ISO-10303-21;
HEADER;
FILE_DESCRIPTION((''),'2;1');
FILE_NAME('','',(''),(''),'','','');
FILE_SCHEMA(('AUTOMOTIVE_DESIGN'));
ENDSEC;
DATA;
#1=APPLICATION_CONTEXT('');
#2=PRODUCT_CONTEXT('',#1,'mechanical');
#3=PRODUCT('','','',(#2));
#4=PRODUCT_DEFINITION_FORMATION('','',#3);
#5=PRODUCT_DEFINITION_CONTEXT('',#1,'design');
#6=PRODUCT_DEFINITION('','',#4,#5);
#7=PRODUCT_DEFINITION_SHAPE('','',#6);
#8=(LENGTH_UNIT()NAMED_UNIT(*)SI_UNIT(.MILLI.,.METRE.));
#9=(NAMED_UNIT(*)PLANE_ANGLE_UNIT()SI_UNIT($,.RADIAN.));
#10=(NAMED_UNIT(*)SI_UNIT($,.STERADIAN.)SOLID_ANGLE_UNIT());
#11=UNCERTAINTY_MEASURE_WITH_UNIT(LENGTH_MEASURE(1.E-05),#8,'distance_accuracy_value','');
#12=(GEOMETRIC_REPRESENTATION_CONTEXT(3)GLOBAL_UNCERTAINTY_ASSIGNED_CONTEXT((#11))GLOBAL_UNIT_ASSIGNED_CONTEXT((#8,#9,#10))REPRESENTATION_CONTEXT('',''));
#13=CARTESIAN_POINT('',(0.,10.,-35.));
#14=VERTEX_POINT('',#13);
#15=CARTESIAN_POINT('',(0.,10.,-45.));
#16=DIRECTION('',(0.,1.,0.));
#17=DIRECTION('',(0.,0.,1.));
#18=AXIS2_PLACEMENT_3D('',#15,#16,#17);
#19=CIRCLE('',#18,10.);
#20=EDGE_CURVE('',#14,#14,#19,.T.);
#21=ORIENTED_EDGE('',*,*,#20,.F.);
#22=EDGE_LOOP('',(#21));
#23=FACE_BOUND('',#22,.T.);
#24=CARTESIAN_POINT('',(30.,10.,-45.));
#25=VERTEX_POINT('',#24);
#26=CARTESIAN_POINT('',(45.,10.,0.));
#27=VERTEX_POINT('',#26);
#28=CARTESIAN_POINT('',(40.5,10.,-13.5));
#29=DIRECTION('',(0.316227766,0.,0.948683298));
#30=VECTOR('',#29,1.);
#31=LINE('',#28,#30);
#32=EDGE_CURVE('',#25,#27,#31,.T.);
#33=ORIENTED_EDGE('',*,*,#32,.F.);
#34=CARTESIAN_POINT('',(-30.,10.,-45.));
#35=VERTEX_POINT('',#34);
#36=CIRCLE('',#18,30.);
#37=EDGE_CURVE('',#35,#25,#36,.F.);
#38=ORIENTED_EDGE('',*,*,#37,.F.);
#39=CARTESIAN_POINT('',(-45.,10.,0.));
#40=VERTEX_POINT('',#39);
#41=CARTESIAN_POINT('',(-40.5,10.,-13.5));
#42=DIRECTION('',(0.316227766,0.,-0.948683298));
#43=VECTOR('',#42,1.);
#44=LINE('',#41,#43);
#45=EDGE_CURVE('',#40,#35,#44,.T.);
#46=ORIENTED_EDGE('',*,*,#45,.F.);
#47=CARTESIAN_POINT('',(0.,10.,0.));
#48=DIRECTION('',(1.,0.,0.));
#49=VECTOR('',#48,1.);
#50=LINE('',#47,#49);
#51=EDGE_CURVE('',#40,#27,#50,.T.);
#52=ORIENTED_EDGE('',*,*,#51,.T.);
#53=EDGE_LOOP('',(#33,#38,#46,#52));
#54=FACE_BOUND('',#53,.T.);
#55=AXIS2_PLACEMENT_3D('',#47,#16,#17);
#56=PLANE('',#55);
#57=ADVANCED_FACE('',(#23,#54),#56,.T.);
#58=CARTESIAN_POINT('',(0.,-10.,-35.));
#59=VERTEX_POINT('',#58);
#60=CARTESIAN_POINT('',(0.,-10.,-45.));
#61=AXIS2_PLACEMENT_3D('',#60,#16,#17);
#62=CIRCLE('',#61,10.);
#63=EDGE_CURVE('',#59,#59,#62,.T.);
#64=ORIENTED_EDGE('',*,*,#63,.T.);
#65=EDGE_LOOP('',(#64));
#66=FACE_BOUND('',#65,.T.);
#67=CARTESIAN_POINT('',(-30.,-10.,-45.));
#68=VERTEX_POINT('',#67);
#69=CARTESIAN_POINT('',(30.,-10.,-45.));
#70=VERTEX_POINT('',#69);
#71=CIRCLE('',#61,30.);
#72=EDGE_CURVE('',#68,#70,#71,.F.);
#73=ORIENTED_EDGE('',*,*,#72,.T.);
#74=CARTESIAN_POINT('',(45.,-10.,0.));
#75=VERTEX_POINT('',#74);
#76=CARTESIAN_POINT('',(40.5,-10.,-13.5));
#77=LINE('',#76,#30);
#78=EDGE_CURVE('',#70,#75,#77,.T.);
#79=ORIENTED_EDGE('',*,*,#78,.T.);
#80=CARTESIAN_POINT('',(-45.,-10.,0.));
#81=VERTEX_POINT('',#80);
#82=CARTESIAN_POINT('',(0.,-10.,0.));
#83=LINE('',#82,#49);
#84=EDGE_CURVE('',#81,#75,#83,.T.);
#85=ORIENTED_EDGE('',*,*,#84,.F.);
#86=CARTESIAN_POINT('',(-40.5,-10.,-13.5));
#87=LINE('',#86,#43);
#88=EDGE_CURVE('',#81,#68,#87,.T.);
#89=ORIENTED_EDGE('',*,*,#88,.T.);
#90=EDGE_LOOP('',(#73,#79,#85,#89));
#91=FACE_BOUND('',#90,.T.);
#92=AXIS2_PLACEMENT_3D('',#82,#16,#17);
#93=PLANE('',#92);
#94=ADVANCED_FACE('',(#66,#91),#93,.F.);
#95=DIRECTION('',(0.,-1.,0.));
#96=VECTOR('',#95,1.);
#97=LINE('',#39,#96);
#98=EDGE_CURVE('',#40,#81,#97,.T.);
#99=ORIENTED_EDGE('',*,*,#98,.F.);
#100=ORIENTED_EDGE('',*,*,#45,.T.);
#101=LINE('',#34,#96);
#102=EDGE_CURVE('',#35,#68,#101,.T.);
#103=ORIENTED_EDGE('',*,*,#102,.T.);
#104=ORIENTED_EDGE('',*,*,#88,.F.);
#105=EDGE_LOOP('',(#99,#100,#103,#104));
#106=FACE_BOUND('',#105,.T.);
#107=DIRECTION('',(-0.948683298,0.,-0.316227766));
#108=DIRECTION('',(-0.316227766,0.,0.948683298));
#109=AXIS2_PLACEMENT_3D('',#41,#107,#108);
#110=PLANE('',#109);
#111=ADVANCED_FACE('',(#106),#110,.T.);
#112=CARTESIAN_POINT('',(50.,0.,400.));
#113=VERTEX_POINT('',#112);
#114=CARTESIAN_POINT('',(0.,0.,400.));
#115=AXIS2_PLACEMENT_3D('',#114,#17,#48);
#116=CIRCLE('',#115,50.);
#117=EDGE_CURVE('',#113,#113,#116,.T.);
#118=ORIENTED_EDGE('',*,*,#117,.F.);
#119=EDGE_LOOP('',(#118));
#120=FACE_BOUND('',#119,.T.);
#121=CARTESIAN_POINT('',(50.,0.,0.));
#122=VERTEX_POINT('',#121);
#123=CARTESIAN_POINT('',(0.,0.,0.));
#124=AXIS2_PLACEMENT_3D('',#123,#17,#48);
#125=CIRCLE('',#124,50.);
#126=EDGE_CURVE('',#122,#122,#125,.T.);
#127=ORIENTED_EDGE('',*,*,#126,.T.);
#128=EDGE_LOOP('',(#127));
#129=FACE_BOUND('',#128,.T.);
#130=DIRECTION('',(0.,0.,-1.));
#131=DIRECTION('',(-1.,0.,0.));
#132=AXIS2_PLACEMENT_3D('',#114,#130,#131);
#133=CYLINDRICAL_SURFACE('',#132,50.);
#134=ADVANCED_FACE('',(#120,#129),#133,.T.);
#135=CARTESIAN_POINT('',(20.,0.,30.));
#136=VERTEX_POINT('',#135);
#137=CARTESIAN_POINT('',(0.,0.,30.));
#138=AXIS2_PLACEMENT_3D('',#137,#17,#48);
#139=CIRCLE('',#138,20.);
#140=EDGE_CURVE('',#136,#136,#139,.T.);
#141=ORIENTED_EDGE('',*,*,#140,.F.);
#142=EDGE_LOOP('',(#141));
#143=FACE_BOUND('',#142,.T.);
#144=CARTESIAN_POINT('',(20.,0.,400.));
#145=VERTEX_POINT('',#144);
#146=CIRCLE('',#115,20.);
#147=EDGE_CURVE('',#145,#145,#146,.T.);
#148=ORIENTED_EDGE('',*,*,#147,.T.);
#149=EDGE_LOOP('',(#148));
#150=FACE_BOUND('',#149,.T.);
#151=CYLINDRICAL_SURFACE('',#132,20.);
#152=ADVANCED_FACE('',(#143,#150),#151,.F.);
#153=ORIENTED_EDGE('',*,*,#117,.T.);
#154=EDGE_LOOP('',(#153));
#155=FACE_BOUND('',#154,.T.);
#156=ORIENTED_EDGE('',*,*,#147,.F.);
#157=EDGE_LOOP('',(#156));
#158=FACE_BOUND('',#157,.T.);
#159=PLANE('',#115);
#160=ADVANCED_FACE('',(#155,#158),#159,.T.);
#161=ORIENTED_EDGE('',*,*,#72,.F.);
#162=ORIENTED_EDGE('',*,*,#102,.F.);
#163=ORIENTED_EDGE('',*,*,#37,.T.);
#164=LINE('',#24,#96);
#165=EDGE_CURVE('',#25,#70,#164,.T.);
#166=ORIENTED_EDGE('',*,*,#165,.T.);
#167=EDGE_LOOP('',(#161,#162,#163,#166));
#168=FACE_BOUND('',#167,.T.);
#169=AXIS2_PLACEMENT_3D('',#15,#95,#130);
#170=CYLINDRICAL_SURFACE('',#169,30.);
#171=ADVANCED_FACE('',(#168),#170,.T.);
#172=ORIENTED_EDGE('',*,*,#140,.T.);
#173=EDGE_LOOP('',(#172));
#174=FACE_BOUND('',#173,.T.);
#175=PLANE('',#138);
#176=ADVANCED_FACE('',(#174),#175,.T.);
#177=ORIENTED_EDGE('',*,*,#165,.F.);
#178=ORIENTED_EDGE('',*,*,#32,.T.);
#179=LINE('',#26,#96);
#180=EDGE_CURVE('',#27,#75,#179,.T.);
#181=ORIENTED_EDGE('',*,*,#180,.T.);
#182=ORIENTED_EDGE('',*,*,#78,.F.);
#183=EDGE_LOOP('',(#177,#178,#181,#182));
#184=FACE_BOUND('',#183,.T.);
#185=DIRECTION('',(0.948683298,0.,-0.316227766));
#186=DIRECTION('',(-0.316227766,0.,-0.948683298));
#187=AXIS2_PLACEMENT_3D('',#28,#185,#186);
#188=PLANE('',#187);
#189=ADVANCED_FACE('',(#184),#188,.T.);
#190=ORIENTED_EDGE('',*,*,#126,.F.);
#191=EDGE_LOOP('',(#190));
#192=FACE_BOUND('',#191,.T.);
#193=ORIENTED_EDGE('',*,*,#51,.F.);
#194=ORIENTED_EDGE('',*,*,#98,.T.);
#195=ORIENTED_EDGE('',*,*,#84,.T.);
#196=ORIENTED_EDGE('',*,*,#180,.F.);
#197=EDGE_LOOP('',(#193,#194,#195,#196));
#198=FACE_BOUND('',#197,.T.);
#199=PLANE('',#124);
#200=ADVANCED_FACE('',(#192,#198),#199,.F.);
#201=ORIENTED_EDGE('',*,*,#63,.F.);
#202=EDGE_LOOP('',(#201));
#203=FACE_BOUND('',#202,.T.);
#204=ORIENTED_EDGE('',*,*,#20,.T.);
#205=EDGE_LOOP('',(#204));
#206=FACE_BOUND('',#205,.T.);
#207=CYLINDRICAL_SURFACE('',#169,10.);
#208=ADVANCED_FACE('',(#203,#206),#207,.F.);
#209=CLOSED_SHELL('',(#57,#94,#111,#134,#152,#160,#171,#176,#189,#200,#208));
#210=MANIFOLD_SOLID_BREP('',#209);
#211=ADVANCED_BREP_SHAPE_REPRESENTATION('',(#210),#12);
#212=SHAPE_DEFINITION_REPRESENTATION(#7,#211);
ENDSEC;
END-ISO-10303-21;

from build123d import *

# Parameters (mm, degrees)
SKETCH1_R           = 50
BOSS_EXTRUDE1_DEPTH = 400
SKETCH3_R           = 10
BOSS_EXTRUDE2_DEPTH = 10
SHELL1_START        = 30
SHELL1_OUTLINE_R    = 20
SHELL1_DEPTH        = 370


# Read off the part's stored shape, not the designer's step: Shell1
with BuildPart() as part:
    # Sketch1 → Boss-Extrude1 (new body)
    with BuildSketch(Plane.XY):
        Circle(SKETCH1_R)
    extrude(amount=BOSS_EXTRUDE1_DEPTH)

    # Sketch3 → Boss-Extrude2 (add, symmetric)
    with BuildSketch(Plane(origin=(0, 0, 0), x_dir=(1, 0, 0), z_dir=(0, 1, 0))):
        with BuildLine():
            ThreePointArc((-30, 45), (0, 75), (30, 45))
            Line((30, 45), (45, 0))
            Line((45, 0), (-45, 0))
            Line((-45, 0), (-30, 45))
        make_face()
        with Locations(Location((0, 45, 0), (0, 0, 270))):
            Circle(SKETCH3_R, mode=Mode.SUBTRACT)
    extrude(amount=BOSS_EXTRUDE2_DEPTH, both=True)

    # Shell1 outline → Shell1 (cut)
    with BuildSketch(Plane.XY.offset(SHELL1_START)):
        Circle(SHELL1_OUTLINE_R)
    extrude(amount=SHELL1_DEPTH, mode=Mode.SUBTRACT)


solid = part.part
